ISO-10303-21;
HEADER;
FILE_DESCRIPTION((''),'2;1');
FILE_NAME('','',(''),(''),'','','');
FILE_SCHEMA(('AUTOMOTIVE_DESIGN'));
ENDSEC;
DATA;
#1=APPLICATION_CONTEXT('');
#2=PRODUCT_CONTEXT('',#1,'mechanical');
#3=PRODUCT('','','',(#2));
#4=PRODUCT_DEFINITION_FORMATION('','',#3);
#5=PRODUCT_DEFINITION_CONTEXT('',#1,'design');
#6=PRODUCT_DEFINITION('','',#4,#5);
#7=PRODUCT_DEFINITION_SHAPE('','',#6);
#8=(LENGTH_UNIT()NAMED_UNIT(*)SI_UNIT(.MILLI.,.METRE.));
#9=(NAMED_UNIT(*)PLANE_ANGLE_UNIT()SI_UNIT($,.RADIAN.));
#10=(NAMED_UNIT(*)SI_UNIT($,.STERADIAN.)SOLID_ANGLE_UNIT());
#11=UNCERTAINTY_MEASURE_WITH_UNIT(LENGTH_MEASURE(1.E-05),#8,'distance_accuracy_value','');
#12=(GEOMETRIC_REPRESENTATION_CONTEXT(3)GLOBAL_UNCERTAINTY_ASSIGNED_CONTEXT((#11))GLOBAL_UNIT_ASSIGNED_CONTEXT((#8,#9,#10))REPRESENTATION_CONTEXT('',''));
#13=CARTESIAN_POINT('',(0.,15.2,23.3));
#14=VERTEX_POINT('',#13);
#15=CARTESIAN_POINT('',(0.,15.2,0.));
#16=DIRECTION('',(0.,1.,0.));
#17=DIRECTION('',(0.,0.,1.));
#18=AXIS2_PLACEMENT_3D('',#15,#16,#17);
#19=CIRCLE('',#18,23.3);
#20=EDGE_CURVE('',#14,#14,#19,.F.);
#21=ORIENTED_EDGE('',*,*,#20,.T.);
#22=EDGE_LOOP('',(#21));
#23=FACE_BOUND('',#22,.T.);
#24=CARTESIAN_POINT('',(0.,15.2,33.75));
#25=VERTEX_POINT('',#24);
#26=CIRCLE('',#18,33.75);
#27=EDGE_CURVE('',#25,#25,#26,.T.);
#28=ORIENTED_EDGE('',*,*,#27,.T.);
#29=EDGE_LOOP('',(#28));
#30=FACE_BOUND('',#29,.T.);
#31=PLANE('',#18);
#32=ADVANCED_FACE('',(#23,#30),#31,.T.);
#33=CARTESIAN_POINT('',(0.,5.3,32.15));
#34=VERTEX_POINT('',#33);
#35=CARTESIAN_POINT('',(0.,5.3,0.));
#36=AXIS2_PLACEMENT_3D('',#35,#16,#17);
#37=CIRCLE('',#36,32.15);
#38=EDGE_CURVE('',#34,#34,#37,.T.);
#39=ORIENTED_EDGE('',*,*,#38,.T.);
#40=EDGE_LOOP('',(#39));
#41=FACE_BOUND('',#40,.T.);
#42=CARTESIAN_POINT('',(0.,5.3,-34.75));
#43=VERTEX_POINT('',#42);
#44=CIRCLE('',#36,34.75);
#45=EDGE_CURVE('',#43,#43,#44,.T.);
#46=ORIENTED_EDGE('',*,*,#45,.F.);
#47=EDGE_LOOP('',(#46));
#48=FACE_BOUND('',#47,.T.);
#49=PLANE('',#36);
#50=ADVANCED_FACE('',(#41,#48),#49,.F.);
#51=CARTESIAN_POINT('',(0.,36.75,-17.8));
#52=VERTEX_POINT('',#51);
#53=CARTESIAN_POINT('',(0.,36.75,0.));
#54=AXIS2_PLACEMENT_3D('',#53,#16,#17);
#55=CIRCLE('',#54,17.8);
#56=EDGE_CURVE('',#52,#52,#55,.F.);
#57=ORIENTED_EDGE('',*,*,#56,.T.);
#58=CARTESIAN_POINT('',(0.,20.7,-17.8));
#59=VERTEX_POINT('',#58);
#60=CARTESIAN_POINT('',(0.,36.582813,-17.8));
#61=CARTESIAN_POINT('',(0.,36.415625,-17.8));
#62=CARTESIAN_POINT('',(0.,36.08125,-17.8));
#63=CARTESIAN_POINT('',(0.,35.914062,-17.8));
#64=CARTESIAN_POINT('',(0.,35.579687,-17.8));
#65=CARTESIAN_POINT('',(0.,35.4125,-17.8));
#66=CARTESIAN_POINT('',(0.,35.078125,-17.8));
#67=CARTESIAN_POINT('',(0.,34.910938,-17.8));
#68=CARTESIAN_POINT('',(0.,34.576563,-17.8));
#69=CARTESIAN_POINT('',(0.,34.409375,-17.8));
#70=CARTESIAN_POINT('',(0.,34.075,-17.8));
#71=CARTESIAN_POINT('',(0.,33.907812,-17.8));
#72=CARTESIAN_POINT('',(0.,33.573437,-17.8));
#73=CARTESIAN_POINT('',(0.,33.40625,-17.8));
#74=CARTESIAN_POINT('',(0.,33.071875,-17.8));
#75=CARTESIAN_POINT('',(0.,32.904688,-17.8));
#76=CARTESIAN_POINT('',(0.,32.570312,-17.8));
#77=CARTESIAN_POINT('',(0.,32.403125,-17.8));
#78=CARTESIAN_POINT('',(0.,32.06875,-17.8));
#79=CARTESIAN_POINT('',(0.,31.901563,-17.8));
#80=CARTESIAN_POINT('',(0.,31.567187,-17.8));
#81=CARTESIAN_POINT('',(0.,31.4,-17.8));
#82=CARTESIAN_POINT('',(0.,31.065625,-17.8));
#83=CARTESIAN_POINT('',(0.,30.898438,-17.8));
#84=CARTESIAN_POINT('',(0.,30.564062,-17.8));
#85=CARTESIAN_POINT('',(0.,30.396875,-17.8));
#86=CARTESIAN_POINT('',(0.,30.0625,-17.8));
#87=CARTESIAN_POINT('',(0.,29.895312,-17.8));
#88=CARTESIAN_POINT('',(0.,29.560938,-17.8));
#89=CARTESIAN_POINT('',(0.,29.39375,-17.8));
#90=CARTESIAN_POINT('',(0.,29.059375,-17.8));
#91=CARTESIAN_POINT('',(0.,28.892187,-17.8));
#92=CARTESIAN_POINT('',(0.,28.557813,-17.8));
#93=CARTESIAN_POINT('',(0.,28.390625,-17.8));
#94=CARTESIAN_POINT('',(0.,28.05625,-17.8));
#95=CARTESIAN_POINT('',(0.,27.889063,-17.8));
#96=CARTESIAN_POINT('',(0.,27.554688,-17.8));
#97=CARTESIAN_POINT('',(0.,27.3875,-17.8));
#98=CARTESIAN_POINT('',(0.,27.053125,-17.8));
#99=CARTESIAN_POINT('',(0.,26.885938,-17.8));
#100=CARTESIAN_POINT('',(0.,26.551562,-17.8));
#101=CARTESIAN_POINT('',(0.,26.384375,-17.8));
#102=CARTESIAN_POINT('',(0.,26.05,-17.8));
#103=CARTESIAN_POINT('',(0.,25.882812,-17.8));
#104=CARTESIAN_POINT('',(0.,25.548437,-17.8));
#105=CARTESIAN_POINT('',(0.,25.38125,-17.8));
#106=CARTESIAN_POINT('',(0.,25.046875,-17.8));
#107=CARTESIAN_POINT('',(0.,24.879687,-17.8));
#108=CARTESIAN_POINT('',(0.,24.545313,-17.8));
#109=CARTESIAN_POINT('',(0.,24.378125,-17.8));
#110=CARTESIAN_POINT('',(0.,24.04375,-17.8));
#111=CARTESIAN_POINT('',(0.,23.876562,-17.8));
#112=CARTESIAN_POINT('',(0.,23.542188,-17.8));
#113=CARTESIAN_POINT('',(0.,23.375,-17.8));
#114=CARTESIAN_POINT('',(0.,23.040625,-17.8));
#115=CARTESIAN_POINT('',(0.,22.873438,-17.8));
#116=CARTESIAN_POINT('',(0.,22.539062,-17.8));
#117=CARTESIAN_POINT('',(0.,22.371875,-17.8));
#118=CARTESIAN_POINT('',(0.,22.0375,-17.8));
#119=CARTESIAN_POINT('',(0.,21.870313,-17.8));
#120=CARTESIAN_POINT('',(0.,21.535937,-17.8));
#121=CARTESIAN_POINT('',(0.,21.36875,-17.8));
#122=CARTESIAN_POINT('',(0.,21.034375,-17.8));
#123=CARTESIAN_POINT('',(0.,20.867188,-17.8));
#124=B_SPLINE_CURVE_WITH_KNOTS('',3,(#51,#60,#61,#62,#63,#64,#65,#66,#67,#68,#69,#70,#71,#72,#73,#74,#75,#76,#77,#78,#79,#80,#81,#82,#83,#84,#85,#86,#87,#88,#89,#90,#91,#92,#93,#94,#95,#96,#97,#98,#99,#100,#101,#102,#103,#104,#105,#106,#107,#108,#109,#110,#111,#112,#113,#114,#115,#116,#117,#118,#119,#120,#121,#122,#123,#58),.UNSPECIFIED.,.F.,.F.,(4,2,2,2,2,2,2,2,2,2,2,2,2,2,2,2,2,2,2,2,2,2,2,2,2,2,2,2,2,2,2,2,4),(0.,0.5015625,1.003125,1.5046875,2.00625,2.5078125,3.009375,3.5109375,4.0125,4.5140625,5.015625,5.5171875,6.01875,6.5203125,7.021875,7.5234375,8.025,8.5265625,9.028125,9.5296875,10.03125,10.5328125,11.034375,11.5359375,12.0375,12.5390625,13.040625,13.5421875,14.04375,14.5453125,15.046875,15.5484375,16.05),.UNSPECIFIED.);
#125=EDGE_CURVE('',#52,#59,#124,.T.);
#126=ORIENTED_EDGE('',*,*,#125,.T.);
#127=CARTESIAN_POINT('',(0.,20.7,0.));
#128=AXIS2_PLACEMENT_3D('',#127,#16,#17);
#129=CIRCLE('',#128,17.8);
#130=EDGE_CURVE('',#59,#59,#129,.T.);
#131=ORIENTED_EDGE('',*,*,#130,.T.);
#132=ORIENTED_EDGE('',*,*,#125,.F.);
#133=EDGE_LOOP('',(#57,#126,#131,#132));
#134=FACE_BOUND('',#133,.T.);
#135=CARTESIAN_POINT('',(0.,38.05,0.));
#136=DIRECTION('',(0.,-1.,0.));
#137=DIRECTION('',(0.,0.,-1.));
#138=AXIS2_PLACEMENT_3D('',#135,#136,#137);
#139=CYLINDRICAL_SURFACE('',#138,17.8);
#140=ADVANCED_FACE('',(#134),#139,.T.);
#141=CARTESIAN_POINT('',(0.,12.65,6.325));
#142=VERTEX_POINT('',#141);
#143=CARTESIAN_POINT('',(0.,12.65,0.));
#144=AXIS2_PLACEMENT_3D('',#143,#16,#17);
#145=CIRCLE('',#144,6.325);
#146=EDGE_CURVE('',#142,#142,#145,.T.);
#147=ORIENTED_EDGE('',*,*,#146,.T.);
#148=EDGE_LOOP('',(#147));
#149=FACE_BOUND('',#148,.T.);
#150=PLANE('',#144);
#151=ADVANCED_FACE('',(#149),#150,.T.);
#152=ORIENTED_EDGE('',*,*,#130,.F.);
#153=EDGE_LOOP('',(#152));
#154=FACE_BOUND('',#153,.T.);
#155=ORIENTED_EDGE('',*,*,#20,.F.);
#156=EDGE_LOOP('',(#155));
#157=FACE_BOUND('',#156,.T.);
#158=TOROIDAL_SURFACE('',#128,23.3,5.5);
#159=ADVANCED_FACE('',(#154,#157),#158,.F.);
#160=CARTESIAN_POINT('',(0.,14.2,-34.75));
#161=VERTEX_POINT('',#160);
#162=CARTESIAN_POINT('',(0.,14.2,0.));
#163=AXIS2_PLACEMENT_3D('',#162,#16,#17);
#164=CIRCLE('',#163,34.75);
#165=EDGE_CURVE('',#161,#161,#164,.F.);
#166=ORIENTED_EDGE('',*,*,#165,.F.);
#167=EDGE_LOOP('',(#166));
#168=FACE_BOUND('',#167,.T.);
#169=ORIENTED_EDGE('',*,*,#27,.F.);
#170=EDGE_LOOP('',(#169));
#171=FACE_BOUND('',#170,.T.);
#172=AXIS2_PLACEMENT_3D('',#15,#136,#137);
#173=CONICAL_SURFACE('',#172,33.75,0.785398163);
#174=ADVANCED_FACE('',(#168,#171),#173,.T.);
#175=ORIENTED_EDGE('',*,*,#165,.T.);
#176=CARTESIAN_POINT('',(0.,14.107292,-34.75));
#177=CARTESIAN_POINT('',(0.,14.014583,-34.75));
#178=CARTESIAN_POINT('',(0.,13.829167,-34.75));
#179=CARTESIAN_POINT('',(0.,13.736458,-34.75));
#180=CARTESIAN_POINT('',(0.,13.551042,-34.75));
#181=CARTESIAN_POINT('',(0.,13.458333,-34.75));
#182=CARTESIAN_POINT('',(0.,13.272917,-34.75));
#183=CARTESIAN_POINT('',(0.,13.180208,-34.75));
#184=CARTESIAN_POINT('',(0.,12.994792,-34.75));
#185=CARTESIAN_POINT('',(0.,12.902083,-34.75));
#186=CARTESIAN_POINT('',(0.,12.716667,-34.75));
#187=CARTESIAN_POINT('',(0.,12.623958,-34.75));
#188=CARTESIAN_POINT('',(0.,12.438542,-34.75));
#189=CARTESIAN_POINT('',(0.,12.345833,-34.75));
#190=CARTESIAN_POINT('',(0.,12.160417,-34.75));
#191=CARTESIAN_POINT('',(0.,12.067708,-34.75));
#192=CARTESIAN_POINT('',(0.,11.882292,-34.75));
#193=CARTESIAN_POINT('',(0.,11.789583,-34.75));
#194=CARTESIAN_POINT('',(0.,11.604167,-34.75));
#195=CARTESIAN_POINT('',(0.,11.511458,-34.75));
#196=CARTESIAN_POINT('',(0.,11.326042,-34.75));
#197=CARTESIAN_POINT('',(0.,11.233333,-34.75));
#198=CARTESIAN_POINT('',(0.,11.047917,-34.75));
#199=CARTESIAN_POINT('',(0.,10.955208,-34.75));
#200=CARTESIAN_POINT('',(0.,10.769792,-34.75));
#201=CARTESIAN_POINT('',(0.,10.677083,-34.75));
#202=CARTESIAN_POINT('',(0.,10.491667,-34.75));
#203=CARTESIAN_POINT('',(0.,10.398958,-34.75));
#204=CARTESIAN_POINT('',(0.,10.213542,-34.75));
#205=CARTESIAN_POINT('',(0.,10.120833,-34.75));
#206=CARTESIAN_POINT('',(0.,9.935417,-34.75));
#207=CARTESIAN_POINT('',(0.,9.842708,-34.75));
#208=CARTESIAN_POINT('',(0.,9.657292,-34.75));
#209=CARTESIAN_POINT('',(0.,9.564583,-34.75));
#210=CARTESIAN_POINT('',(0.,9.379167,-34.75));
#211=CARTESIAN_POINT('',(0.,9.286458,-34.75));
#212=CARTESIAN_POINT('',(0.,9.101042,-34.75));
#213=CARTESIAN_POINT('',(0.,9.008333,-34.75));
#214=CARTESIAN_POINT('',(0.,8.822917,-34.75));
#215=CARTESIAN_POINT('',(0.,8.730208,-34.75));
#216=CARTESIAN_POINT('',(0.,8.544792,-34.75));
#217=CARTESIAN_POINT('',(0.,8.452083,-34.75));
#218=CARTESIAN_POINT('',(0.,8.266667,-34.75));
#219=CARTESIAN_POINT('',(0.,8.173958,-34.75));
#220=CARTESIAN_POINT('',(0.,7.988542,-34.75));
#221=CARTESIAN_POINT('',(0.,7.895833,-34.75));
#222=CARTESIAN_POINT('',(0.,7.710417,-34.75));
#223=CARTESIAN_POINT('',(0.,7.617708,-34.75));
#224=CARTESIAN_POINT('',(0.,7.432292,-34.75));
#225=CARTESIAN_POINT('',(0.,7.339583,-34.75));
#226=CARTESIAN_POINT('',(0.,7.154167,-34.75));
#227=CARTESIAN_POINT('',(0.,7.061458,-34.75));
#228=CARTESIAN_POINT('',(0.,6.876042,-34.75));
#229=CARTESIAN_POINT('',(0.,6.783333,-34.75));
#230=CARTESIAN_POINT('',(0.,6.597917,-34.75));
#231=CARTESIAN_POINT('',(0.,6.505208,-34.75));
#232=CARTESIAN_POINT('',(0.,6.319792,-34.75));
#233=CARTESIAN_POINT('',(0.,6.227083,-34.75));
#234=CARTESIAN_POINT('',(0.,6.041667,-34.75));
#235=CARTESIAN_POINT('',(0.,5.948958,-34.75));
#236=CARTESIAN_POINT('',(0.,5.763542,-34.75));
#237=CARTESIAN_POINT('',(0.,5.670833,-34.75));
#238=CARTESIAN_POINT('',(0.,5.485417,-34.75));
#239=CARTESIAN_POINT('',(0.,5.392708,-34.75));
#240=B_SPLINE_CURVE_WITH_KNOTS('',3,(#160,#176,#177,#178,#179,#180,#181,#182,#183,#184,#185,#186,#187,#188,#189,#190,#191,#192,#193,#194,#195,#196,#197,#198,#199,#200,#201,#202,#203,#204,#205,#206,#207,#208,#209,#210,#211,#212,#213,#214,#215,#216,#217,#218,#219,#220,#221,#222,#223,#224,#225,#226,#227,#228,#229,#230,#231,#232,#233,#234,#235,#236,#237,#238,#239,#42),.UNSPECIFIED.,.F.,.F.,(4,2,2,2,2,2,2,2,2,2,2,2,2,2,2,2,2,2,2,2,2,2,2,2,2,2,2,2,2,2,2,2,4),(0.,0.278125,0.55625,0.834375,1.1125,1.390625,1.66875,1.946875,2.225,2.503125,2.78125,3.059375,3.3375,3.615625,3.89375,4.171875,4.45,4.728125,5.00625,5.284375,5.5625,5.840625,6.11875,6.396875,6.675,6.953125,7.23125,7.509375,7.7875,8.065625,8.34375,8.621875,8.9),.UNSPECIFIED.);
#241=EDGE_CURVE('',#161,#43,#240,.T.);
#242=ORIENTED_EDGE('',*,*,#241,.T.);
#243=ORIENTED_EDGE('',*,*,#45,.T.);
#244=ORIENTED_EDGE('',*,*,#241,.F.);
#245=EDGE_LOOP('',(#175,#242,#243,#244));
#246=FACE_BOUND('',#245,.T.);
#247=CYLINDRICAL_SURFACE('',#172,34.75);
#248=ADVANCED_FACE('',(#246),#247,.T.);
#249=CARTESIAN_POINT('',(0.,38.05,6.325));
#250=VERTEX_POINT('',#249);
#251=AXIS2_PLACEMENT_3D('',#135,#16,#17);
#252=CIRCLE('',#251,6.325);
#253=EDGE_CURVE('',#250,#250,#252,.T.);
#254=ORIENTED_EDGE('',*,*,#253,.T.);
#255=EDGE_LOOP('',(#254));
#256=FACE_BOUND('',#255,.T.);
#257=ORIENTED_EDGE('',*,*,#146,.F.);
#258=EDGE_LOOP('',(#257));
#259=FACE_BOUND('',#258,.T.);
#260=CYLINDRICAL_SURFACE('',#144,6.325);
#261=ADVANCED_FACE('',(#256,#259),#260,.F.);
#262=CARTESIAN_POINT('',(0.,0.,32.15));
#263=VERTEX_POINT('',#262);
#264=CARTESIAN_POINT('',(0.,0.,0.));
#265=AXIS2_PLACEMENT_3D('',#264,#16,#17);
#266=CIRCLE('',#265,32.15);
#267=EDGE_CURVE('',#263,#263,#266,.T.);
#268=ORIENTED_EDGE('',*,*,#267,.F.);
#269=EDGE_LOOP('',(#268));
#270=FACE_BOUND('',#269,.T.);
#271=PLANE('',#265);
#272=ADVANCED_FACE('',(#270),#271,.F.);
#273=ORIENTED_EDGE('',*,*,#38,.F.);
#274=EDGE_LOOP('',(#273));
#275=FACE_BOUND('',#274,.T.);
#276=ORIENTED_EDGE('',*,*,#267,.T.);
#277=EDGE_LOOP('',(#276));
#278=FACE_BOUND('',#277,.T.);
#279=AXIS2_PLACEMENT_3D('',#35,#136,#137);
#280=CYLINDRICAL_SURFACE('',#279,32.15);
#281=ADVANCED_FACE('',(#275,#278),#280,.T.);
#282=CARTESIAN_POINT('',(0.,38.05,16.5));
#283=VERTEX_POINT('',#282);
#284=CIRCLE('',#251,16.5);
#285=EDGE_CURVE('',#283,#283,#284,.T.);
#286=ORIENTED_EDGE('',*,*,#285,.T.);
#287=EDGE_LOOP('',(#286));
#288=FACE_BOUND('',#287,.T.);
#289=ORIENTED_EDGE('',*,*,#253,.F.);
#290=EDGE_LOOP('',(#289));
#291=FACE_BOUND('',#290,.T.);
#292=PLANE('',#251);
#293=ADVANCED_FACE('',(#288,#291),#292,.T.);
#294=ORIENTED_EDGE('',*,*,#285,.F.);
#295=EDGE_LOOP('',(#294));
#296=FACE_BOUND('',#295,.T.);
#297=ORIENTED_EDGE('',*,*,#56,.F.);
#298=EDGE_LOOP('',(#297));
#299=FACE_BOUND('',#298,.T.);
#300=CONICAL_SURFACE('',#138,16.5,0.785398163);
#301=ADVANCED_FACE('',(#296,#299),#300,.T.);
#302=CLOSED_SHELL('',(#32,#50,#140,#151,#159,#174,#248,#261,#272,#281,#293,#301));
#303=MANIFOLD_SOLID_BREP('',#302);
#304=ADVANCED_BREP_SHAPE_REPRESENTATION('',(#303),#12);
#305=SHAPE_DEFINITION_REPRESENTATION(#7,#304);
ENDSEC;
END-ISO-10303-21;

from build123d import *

# Parameters (mm, degrees)
SKETCH1_R           = 32.15
BOSS_EXTRUDE1_DEPTH = 5.3
SKETCH2_R           = 34.75
BOSS_EXTRUDE2_DEPTH = 9.9
SKETCH3_R           = 17.8
BOSS_EXTRUDE3_DEPTH = 22.85
SKETCH4_R           = 6.325
CUT_EXTRUDE1_DEPTH  = 25.4
FILLET1_R           = 5.5
CHAMFER2_SIZE       = 1


with BuildPart() as part:
    # Sketch1 → Boss-Extrude1 (new body)
    with BuildSketch(Plane(origin=(0, 0, 0), x_dir=(1, 0, 0), z_dir=(0, 1, 0))):
        with Locations(Location((0, 0, 0), (0, 0, 270))):
            Circle(SKETCH1_R)
    extrude(amount=BOSS_EXTRUDE1_DEPTH)

    # Sketch2 → Boss-Extrude2 (add)
    with BuildSketch(Plane(origin=(0, 5.3, 0), x_dir=(1, 0, 0), z_dir=(0, 1, 0))):
        with Locations(Location((0, 0, 0), (0, 0, 90))):
            Circle(SKETCH2_R)
    extrude(amount=BOSS_EXTRUDE2_DEPTH)

    # Sketch3 → Boss-Extrude3 (add)
    with BuildSketch(Plane(origin=(0, 15.2, 0), x_dir=(1, 0, 0), z_dir=(0, 1, 0))):
        with Locations(Location((0, 0, 0), (0, 0, 90))):
            Circle(SKETCH3_R)
    extrude(amount=BOSS_EXTRUDE3_DEPTH)

    # Sketch4 → Cut-Extrude1 (cut)
    with BuildSketch(Plane(origin=(0, 38.05, 0), x_dir=(1, 0, 0), z_dir=(0, 1, 0))):
        with Locations(Location((0, 0, 0), (0, 0, 270))):
            Circle(SKETCH4_R)
    extrude(amount=-CUT_EXTRUDE1_DEPTH, mode=Mode.SUBTRACT)

    # Fillet1
    fillet1_edges = [part.edges().sort_by_distance(p)[0] for p in [
        (0, 15.2, 17.8),
    ]]
    fillet(fillet1_edges, radius=FILLET1_R)

    # Chamfer1: read off the stored shape, not the designer's step
    # Chamfer1 outline → Chamfer1 (revolve, cut)
    with BuildSketch(Plane.XY):
        Polygon((17.8, 38.05), (16.5, 38.05), (17.8, 36.75), align=None)
    revolve(axis=Axis((0, 0, 0), (0, 1, 0)), mode=Mode.SUBTRACT)

    # Chamfer2
    chamfer2_edges = [part.edges().sort_by_distance(p)[0] for p in [
        (0, 15.2, 34.75),
    ]]
    chamfer(chamfer2_edges, length=CHAMFER2_SIZE)


solid = part.part
